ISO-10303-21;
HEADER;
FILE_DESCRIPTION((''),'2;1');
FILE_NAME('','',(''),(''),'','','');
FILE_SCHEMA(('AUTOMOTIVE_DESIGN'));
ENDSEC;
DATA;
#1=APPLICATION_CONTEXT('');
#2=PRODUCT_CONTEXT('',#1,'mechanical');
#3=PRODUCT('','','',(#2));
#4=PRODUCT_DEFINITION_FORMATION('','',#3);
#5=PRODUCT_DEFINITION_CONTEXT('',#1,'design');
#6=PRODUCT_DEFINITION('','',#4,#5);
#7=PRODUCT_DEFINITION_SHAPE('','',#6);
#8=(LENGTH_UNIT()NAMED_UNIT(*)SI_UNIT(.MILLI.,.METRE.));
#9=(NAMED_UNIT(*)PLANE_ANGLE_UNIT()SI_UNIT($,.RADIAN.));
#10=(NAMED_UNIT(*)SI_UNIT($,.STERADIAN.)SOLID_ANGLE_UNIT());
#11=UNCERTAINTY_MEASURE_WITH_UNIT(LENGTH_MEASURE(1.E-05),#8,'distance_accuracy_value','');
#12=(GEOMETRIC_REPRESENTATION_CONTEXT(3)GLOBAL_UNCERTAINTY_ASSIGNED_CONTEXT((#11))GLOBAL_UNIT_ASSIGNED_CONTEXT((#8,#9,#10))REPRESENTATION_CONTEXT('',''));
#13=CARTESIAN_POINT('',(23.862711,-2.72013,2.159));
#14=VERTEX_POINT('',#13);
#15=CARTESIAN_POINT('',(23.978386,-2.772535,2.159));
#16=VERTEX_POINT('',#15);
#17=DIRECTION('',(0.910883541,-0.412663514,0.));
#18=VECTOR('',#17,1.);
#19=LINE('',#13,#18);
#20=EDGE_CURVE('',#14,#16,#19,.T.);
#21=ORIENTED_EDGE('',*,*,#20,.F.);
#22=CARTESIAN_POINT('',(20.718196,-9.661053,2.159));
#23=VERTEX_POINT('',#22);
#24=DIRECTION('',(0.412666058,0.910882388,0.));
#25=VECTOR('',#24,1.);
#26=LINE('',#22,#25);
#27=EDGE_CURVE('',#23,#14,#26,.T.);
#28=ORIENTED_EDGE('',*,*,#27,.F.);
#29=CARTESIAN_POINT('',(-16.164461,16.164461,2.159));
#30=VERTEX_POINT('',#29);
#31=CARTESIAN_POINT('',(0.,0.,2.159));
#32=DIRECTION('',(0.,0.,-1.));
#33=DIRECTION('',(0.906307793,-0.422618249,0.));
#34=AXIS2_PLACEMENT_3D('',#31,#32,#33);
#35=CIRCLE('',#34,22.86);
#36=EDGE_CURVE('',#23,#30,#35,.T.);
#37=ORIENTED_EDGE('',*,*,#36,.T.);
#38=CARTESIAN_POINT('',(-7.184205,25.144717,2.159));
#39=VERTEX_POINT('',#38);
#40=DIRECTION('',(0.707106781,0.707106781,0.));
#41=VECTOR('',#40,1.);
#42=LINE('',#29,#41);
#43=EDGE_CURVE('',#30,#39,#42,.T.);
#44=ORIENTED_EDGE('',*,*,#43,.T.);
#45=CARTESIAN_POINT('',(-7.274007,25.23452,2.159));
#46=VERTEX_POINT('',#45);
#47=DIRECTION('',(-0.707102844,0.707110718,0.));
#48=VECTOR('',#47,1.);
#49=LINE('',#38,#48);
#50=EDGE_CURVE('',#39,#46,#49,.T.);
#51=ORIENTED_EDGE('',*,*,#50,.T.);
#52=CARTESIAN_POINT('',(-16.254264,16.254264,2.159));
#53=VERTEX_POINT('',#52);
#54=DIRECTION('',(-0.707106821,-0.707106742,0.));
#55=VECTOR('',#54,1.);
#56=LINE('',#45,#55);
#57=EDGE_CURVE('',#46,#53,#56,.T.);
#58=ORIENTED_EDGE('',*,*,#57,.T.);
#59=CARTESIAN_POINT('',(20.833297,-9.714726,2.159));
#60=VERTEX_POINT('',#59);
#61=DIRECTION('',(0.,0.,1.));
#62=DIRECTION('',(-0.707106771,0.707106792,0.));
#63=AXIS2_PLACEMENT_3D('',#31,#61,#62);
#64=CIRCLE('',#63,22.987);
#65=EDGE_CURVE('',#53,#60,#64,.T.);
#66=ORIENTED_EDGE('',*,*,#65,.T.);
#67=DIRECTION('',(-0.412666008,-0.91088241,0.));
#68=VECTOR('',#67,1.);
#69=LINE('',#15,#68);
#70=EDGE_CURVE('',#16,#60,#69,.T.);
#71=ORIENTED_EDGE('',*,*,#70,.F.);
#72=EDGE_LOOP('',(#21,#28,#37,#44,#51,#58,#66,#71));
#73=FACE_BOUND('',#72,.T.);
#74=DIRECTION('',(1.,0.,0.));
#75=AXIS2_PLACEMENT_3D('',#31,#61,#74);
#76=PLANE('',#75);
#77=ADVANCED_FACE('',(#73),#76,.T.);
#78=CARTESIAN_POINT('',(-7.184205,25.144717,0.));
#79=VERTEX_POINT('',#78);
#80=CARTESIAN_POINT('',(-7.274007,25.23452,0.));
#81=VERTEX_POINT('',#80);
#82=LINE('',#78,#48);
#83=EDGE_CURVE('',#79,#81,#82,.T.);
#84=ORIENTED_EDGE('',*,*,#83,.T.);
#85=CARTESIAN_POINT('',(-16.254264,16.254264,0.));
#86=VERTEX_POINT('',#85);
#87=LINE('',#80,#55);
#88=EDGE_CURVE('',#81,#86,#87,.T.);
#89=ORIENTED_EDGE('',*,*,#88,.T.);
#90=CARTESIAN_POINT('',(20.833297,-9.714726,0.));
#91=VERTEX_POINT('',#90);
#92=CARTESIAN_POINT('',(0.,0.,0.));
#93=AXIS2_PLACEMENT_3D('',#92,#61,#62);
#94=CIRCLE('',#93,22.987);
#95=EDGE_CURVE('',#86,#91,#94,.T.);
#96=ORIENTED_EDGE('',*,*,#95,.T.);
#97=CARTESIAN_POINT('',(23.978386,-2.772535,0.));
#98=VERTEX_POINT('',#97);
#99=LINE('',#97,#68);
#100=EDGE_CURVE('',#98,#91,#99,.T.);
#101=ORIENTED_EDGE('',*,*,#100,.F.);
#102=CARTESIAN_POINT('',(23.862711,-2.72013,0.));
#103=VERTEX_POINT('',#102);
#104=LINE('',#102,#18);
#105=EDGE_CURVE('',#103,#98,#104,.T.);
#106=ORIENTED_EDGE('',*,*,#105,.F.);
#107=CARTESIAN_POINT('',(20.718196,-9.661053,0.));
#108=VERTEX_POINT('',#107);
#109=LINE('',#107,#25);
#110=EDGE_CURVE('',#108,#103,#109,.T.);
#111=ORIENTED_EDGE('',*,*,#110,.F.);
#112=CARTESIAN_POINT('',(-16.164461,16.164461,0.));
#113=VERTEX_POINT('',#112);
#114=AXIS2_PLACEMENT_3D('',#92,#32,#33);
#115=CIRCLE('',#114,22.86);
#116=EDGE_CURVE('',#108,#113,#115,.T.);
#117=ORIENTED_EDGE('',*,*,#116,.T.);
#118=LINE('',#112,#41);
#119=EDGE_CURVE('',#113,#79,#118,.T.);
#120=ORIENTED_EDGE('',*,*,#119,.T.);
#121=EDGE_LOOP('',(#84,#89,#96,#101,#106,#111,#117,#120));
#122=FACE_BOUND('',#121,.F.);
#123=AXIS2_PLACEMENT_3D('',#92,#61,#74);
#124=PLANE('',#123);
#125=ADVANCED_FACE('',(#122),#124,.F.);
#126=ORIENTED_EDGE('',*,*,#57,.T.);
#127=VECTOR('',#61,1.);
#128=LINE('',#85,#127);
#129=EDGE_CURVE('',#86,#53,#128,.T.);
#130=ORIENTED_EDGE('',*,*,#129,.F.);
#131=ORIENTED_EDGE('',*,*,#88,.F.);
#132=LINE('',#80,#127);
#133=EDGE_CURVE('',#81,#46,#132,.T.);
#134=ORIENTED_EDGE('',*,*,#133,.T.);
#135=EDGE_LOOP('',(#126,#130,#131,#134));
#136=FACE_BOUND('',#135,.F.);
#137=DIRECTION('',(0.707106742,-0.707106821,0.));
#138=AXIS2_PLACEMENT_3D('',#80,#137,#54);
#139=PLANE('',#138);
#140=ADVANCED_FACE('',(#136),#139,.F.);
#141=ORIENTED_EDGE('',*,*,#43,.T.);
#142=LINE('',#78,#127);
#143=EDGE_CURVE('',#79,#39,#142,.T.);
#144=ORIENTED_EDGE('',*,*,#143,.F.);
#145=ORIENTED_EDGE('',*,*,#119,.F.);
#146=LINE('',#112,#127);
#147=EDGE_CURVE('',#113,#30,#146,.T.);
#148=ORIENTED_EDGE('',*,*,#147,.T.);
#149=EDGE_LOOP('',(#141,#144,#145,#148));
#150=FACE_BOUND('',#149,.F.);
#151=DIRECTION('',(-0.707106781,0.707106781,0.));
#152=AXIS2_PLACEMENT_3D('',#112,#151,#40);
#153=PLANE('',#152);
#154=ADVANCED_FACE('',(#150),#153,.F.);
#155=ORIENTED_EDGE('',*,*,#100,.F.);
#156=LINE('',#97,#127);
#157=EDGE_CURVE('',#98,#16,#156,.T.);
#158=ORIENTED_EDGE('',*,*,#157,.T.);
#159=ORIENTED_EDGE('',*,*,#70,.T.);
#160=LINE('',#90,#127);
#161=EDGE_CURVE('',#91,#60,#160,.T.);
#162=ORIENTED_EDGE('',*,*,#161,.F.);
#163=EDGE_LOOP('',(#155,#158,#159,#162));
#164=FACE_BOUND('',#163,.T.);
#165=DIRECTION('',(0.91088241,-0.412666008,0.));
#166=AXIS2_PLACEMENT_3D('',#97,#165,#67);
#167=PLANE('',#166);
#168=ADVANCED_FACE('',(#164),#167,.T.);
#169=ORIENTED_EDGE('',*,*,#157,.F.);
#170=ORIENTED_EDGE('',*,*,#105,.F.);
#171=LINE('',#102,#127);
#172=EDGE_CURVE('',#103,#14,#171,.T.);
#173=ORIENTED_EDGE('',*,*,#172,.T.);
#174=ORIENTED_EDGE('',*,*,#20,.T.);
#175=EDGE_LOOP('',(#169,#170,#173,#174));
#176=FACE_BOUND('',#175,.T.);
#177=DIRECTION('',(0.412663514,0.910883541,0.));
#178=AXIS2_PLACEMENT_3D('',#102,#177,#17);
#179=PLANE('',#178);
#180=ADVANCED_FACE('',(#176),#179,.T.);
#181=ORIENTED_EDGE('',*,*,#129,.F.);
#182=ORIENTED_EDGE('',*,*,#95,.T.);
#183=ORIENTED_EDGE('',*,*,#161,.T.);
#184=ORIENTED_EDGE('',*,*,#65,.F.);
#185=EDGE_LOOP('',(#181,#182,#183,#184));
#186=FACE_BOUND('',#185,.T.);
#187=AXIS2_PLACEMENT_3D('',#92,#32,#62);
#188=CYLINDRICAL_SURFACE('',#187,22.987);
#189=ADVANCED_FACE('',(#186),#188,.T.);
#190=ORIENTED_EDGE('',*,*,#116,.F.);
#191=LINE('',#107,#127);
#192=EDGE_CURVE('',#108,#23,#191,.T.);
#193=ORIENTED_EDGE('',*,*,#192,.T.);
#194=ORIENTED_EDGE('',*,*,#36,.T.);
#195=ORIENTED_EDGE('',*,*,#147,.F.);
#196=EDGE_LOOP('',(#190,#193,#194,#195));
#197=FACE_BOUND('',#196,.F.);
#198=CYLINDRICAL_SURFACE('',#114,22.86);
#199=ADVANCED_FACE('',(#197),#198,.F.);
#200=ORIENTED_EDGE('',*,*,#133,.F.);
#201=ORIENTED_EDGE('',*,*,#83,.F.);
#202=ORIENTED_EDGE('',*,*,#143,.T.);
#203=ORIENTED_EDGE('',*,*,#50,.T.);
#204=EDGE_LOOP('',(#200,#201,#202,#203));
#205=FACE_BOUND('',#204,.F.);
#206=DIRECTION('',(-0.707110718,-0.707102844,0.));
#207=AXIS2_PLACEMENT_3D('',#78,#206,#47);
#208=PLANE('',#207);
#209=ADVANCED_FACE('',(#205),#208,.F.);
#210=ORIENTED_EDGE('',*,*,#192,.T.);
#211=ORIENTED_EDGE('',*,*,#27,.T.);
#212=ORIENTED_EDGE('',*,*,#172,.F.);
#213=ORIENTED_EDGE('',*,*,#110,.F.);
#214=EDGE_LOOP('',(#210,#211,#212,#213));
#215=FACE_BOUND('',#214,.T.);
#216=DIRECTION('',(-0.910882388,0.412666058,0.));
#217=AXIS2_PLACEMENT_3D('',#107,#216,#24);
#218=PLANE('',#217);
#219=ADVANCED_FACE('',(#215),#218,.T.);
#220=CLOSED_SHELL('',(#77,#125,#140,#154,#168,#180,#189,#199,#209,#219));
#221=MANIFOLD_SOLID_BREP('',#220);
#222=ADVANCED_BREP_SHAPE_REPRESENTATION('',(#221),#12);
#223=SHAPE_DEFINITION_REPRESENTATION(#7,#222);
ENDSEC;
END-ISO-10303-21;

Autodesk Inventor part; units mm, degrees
ref_plane "YZ Plane" through (0, 0, 0) normal (1, 0, 0) x (0, 1, 0)
ref_plane "XZ Plane" through (0, 0, 0) normal (0, 1, 0) x (-1, 0, 0)
ref_plane "XY Plane" through (0, 0, 0) normal (0, 0, 1) x (1, 0, 0)
sketch "Sketch1" plane through (0, 0, 0) normal (0, 0, 1) x (1, 0, 0)
  arc A0 (-16.164461, 16.164461) -> (20.718196, -9.661053) centre (0, 0) ccw
  arc A1 (-16.254264, 16.254264) -> (20.833297, -9.714726) centre (0, 0) ccw
  line L0 (-16.254264, 16.254264) -> (-16.164461, 16.164461)
  line L1 (20.718196, -9.661053) -> (20.833297, -9.714726)
  line L2 (0, 0) -> (15.160579, 0) construction
  line L3 (20.718196, -9.661053) -> (23.862711, -2.72013)
  line L4 (23.862711, -2.72013) -> (23.978386, -2.772535)
  line L5 (23.978386, -2.772535) -> (20.833297, -9.714726)
  line L6 (-16.254264, 16.254264) -> (-7.274007, 25.23452)
  line L7 (-7.274007, 25.23452) -> (-7.184205, 25.144717)
  line L8 (-7.184205, 25.144717) -> (-16.164461, 16.164461)
  line L9 (0, 0) -> (0, 16.116809) construction
  dimension "d0" = 45.72
  dimension "d1" = 45.974
  dimension "d2" = 25
  dimension "d3" = 7.62
  dimension "d5" = 12.7
  dimension "d6" = 45
sketch "Sketch1 outline for Extrusion1" plane through (0, 0, 0) normal (0, 0, 1) x (1, 0, 0)
  line L0 (-7.274007, 25.23452) -> (-16.254264, 16.254264)
  arc A0 (-16.254264, 16.254264) -> (20.833297, -9.714726) centre (0, 0) ccw
  line L1 (23.978386, -2.772535) -> (20.833297, -9.714726)
  line L2 (23.862711, -2.72013) -> (23.978386, -2.772535)
  line L3 (20.718196, -9.661053) -> (23.862711, -2.72013)
  arc A1 (20.718196, -9.661053) -> (-16.164461, 16.164461) centre (0, 0) cw
  line L4 (-16.164461, 16.164461) -> (-7.184205, 25.144717)
  line L5 (-7.184205, 25.144717) -> (-7.274007, 25.23452)
extrude "Extrusion1" add sketch "Sketch1 outline for Extrusion1" along normal blind 2.159
properties part number "CopperContact" material "Copper, Alloy"
